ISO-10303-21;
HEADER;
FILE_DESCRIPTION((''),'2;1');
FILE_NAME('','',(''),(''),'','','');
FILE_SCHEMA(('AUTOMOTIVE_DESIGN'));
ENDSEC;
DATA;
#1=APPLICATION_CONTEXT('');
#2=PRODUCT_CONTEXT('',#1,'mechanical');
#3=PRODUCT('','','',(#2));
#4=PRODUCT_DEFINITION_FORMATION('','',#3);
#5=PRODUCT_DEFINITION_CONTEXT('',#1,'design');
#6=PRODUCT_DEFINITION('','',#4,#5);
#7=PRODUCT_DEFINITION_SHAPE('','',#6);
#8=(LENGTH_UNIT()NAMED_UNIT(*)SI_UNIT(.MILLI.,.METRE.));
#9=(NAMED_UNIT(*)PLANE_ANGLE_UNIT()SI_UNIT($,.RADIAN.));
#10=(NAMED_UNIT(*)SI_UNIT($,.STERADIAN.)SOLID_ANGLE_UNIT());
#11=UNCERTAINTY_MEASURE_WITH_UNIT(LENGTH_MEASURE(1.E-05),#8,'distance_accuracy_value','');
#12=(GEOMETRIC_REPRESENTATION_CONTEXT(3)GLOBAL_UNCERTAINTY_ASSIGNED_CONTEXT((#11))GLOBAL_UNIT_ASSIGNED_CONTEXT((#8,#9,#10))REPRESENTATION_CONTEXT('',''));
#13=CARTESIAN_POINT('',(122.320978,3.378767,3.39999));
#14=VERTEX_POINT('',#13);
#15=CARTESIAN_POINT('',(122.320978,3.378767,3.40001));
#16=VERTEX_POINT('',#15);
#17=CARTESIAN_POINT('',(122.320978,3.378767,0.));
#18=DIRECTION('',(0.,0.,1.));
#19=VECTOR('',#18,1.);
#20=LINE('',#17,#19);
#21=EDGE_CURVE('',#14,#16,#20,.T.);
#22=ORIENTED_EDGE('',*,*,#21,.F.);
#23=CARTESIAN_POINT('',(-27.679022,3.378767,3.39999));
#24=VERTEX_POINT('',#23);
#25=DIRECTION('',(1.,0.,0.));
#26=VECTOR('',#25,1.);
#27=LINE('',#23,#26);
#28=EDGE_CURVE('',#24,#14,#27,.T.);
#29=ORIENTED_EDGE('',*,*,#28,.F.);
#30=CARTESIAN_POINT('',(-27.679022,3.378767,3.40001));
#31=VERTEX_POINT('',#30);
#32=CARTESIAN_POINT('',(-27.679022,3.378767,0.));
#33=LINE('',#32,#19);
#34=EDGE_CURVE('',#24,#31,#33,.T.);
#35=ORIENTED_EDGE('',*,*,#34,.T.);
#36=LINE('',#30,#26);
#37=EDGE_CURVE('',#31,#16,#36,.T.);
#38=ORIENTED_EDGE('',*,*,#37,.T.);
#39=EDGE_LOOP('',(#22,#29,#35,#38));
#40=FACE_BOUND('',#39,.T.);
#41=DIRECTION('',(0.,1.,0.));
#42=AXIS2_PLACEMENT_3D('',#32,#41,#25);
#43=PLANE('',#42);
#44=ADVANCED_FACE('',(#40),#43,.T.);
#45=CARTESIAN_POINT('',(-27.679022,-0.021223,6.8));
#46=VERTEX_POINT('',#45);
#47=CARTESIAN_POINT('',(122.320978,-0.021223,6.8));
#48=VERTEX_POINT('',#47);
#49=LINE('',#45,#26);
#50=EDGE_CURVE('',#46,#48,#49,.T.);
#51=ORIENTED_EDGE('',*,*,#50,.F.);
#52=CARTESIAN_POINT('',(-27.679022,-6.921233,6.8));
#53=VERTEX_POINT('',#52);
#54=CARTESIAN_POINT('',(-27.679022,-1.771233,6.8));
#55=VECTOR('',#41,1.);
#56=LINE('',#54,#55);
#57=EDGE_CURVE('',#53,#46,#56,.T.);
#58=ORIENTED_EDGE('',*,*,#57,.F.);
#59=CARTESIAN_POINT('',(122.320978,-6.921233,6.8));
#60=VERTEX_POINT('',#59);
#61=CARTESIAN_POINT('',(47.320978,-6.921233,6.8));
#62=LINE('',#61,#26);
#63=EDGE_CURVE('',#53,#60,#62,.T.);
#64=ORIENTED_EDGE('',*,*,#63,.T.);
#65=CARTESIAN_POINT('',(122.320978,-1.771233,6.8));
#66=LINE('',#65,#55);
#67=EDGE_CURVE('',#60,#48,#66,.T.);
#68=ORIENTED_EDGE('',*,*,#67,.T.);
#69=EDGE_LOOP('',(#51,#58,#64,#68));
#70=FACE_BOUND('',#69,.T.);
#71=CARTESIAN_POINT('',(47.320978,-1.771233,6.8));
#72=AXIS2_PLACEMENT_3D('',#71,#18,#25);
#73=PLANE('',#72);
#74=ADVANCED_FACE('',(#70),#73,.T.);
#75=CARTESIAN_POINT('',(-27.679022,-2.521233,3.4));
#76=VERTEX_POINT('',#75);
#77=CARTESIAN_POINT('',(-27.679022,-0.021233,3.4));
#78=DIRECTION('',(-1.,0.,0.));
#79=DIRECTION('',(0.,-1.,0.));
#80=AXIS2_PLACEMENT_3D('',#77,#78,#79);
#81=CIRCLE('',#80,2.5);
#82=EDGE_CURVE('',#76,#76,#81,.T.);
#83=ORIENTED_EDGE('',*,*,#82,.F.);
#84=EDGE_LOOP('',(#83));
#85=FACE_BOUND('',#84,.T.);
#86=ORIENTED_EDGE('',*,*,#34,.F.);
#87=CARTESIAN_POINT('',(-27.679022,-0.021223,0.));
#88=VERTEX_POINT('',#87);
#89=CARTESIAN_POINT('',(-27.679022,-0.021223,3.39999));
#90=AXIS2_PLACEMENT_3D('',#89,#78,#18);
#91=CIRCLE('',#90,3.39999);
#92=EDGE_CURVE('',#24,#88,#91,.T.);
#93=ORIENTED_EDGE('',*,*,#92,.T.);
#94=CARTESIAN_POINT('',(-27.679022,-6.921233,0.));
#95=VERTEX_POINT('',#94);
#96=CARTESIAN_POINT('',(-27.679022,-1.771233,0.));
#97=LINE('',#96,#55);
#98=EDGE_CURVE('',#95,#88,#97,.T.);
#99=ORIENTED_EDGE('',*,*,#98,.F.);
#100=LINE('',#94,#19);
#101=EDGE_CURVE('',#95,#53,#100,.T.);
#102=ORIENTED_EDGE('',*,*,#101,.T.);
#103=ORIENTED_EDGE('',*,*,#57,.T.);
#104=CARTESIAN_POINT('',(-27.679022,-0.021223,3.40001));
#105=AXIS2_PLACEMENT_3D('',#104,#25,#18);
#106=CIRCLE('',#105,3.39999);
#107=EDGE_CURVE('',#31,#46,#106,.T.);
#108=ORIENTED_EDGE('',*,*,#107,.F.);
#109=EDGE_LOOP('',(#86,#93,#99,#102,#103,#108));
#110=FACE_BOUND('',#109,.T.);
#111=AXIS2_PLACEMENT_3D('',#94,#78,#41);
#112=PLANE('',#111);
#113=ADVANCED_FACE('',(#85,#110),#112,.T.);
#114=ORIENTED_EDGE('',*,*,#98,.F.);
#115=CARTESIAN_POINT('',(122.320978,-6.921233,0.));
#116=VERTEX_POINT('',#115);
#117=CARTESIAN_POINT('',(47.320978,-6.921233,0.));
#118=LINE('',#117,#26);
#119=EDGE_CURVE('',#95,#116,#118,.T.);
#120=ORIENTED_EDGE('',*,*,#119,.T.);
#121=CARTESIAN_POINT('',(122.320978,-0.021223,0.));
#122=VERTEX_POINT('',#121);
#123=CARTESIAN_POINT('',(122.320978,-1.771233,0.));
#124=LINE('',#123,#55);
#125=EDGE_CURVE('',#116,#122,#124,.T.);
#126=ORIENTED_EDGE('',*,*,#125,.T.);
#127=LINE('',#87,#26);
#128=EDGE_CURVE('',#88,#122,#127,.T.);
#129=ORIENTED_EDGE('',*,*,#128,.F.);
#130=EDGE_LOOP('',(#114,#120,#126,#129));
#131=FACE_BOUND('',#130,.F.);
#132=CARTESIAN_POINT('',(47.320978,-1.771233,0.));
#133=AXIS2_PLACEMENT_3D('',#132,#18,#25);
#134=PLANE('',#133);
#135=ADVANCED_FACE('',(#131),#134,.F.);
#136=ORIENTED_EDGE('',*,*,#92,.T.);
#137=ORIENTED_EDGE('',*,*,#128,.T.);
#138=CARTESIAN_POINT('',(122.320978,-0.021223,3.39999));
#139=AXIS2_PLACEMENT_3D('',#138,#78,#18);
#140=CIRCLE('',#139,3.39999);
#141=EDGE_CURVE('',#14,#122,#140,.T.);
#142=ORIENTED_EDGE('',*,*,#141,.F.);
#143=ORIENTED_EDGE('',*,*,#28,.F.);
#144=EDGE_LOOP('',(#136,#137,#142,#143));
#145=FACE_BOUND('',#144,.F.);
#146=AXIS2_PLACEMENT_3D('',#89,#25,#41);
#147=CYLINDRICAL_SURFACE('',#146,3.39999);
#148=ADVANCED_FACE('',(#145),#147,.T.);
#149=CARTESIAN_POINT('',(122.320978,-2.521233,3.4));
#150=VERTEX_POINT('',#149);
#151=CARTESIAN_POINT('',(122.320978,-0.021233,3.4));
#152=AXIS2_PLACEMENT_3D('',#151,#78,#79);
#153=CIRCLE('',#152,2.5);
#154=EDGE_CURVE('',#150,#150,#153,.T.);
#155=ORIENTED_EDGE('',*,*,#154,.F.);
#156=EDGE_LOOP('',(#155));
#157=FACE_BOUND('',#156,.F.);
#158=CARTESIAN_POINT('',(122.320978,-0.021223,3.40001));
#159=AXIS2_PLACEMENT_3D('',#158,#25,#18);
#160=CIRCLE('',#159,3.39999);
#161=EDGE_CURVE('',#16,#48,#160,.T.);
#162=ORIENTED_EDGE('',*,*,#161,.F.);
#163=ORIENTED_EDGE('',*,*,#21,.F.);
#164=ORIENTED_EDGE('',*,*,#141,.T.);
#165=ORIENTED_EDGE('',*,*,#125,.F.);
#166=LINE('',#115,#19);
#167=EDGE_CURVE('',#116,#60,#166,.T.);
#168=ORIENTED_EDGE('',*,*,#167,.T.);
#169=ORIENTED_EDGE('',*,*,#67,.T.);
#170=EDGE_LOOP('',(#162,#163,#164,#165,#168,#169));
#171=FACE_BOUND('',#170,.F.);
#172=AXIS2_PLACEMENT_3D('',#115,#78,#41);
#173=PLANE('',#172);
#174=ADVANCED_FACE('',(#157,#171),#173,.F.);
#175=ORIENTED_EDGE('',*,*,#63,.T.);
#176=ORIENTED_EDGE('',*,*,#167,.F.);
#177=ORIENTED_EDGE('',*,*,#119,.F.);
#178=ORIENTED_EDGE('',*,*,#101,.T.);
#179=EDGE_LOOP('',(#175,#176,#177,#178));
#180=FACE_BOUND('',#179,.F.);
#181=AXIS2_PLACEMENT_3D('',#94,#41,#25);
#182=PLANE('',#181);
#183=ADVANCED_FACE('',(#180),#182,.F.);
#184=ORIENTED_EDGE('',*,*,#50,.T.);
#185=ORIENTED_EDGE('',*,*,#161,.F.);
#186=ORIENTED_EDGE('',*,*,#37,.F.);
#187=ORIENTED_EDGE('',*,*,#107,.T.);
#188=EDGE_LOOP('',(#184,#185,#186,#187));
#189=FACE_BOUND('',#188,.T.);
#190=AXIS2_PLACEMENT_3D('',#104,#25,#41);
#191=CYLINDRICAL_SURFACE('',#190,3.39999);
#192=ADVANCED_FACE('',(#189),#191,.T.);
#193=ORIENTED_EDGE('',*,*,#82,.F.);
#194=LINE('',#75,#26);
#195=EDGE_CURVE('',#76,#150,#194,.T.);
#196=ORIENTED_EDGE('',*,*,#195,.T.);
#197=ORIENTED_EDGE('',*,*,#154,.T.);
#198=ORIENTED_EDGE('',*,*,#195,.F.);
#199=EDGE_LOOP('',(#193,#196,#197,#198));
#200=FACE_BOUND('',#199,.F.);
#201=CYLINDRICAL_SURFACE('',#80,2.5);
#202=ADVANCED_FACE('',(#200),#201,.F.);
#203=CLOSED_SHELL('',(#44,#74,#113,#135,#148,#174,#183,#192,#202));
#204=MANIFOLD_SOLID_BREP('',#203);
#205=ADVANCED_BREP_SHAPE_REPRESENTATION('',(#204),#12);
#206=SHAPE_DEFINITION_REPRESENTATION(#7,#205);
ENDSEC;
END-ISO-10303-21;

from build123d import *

# Parameters (mm, degrees)
F0_W     = 150
F0_H     = 10.3
F1_DEPTH = 6.8
F2_R     = 3.39999
F3_R     = 2.5
F4_DEPTH = 150.001


# Not quite as in the source:
# - a fillet or chamfer is up to 0.001 mm smaller than in the source, because OpenCascade refuses the exact size


with BuildPart() as f1:
    # F0 (on Top) → F1 (new body)
    with BuildSketch(Plane.XY):
        with Locations((47.3209783435, -1.7712331437)):
            Rectangle(F0_W, F0_H)
    extrude(amount=F1_DEPTH)

    # F2 (radius 3.4 in the source; OpenCascade refuses exactly that, so slightly less here)
    f2_edges = [f1.edges().sort_by_distance(p)[0] for p in [
        (47.320978, 3.378767, 6.8),
        (47.320978, 3.378767, 0),
    ]]
    fillet(f2_edges, radius=F2_R)

    # F3 (on face) → F4 (cut, through all)
    with BuildSketch(Plane(origin=(-27.6790216565, 0, 0), x_dir=(0, -1, 0), z_dir=(-1, 0, 0))):
        with Locations((0.0212331437, 3.4)):
            Circle(F3_R)
    extrude(amount=-F4_DEPTH, mode=Mode.SUBTRACT)


solid = f1.part
